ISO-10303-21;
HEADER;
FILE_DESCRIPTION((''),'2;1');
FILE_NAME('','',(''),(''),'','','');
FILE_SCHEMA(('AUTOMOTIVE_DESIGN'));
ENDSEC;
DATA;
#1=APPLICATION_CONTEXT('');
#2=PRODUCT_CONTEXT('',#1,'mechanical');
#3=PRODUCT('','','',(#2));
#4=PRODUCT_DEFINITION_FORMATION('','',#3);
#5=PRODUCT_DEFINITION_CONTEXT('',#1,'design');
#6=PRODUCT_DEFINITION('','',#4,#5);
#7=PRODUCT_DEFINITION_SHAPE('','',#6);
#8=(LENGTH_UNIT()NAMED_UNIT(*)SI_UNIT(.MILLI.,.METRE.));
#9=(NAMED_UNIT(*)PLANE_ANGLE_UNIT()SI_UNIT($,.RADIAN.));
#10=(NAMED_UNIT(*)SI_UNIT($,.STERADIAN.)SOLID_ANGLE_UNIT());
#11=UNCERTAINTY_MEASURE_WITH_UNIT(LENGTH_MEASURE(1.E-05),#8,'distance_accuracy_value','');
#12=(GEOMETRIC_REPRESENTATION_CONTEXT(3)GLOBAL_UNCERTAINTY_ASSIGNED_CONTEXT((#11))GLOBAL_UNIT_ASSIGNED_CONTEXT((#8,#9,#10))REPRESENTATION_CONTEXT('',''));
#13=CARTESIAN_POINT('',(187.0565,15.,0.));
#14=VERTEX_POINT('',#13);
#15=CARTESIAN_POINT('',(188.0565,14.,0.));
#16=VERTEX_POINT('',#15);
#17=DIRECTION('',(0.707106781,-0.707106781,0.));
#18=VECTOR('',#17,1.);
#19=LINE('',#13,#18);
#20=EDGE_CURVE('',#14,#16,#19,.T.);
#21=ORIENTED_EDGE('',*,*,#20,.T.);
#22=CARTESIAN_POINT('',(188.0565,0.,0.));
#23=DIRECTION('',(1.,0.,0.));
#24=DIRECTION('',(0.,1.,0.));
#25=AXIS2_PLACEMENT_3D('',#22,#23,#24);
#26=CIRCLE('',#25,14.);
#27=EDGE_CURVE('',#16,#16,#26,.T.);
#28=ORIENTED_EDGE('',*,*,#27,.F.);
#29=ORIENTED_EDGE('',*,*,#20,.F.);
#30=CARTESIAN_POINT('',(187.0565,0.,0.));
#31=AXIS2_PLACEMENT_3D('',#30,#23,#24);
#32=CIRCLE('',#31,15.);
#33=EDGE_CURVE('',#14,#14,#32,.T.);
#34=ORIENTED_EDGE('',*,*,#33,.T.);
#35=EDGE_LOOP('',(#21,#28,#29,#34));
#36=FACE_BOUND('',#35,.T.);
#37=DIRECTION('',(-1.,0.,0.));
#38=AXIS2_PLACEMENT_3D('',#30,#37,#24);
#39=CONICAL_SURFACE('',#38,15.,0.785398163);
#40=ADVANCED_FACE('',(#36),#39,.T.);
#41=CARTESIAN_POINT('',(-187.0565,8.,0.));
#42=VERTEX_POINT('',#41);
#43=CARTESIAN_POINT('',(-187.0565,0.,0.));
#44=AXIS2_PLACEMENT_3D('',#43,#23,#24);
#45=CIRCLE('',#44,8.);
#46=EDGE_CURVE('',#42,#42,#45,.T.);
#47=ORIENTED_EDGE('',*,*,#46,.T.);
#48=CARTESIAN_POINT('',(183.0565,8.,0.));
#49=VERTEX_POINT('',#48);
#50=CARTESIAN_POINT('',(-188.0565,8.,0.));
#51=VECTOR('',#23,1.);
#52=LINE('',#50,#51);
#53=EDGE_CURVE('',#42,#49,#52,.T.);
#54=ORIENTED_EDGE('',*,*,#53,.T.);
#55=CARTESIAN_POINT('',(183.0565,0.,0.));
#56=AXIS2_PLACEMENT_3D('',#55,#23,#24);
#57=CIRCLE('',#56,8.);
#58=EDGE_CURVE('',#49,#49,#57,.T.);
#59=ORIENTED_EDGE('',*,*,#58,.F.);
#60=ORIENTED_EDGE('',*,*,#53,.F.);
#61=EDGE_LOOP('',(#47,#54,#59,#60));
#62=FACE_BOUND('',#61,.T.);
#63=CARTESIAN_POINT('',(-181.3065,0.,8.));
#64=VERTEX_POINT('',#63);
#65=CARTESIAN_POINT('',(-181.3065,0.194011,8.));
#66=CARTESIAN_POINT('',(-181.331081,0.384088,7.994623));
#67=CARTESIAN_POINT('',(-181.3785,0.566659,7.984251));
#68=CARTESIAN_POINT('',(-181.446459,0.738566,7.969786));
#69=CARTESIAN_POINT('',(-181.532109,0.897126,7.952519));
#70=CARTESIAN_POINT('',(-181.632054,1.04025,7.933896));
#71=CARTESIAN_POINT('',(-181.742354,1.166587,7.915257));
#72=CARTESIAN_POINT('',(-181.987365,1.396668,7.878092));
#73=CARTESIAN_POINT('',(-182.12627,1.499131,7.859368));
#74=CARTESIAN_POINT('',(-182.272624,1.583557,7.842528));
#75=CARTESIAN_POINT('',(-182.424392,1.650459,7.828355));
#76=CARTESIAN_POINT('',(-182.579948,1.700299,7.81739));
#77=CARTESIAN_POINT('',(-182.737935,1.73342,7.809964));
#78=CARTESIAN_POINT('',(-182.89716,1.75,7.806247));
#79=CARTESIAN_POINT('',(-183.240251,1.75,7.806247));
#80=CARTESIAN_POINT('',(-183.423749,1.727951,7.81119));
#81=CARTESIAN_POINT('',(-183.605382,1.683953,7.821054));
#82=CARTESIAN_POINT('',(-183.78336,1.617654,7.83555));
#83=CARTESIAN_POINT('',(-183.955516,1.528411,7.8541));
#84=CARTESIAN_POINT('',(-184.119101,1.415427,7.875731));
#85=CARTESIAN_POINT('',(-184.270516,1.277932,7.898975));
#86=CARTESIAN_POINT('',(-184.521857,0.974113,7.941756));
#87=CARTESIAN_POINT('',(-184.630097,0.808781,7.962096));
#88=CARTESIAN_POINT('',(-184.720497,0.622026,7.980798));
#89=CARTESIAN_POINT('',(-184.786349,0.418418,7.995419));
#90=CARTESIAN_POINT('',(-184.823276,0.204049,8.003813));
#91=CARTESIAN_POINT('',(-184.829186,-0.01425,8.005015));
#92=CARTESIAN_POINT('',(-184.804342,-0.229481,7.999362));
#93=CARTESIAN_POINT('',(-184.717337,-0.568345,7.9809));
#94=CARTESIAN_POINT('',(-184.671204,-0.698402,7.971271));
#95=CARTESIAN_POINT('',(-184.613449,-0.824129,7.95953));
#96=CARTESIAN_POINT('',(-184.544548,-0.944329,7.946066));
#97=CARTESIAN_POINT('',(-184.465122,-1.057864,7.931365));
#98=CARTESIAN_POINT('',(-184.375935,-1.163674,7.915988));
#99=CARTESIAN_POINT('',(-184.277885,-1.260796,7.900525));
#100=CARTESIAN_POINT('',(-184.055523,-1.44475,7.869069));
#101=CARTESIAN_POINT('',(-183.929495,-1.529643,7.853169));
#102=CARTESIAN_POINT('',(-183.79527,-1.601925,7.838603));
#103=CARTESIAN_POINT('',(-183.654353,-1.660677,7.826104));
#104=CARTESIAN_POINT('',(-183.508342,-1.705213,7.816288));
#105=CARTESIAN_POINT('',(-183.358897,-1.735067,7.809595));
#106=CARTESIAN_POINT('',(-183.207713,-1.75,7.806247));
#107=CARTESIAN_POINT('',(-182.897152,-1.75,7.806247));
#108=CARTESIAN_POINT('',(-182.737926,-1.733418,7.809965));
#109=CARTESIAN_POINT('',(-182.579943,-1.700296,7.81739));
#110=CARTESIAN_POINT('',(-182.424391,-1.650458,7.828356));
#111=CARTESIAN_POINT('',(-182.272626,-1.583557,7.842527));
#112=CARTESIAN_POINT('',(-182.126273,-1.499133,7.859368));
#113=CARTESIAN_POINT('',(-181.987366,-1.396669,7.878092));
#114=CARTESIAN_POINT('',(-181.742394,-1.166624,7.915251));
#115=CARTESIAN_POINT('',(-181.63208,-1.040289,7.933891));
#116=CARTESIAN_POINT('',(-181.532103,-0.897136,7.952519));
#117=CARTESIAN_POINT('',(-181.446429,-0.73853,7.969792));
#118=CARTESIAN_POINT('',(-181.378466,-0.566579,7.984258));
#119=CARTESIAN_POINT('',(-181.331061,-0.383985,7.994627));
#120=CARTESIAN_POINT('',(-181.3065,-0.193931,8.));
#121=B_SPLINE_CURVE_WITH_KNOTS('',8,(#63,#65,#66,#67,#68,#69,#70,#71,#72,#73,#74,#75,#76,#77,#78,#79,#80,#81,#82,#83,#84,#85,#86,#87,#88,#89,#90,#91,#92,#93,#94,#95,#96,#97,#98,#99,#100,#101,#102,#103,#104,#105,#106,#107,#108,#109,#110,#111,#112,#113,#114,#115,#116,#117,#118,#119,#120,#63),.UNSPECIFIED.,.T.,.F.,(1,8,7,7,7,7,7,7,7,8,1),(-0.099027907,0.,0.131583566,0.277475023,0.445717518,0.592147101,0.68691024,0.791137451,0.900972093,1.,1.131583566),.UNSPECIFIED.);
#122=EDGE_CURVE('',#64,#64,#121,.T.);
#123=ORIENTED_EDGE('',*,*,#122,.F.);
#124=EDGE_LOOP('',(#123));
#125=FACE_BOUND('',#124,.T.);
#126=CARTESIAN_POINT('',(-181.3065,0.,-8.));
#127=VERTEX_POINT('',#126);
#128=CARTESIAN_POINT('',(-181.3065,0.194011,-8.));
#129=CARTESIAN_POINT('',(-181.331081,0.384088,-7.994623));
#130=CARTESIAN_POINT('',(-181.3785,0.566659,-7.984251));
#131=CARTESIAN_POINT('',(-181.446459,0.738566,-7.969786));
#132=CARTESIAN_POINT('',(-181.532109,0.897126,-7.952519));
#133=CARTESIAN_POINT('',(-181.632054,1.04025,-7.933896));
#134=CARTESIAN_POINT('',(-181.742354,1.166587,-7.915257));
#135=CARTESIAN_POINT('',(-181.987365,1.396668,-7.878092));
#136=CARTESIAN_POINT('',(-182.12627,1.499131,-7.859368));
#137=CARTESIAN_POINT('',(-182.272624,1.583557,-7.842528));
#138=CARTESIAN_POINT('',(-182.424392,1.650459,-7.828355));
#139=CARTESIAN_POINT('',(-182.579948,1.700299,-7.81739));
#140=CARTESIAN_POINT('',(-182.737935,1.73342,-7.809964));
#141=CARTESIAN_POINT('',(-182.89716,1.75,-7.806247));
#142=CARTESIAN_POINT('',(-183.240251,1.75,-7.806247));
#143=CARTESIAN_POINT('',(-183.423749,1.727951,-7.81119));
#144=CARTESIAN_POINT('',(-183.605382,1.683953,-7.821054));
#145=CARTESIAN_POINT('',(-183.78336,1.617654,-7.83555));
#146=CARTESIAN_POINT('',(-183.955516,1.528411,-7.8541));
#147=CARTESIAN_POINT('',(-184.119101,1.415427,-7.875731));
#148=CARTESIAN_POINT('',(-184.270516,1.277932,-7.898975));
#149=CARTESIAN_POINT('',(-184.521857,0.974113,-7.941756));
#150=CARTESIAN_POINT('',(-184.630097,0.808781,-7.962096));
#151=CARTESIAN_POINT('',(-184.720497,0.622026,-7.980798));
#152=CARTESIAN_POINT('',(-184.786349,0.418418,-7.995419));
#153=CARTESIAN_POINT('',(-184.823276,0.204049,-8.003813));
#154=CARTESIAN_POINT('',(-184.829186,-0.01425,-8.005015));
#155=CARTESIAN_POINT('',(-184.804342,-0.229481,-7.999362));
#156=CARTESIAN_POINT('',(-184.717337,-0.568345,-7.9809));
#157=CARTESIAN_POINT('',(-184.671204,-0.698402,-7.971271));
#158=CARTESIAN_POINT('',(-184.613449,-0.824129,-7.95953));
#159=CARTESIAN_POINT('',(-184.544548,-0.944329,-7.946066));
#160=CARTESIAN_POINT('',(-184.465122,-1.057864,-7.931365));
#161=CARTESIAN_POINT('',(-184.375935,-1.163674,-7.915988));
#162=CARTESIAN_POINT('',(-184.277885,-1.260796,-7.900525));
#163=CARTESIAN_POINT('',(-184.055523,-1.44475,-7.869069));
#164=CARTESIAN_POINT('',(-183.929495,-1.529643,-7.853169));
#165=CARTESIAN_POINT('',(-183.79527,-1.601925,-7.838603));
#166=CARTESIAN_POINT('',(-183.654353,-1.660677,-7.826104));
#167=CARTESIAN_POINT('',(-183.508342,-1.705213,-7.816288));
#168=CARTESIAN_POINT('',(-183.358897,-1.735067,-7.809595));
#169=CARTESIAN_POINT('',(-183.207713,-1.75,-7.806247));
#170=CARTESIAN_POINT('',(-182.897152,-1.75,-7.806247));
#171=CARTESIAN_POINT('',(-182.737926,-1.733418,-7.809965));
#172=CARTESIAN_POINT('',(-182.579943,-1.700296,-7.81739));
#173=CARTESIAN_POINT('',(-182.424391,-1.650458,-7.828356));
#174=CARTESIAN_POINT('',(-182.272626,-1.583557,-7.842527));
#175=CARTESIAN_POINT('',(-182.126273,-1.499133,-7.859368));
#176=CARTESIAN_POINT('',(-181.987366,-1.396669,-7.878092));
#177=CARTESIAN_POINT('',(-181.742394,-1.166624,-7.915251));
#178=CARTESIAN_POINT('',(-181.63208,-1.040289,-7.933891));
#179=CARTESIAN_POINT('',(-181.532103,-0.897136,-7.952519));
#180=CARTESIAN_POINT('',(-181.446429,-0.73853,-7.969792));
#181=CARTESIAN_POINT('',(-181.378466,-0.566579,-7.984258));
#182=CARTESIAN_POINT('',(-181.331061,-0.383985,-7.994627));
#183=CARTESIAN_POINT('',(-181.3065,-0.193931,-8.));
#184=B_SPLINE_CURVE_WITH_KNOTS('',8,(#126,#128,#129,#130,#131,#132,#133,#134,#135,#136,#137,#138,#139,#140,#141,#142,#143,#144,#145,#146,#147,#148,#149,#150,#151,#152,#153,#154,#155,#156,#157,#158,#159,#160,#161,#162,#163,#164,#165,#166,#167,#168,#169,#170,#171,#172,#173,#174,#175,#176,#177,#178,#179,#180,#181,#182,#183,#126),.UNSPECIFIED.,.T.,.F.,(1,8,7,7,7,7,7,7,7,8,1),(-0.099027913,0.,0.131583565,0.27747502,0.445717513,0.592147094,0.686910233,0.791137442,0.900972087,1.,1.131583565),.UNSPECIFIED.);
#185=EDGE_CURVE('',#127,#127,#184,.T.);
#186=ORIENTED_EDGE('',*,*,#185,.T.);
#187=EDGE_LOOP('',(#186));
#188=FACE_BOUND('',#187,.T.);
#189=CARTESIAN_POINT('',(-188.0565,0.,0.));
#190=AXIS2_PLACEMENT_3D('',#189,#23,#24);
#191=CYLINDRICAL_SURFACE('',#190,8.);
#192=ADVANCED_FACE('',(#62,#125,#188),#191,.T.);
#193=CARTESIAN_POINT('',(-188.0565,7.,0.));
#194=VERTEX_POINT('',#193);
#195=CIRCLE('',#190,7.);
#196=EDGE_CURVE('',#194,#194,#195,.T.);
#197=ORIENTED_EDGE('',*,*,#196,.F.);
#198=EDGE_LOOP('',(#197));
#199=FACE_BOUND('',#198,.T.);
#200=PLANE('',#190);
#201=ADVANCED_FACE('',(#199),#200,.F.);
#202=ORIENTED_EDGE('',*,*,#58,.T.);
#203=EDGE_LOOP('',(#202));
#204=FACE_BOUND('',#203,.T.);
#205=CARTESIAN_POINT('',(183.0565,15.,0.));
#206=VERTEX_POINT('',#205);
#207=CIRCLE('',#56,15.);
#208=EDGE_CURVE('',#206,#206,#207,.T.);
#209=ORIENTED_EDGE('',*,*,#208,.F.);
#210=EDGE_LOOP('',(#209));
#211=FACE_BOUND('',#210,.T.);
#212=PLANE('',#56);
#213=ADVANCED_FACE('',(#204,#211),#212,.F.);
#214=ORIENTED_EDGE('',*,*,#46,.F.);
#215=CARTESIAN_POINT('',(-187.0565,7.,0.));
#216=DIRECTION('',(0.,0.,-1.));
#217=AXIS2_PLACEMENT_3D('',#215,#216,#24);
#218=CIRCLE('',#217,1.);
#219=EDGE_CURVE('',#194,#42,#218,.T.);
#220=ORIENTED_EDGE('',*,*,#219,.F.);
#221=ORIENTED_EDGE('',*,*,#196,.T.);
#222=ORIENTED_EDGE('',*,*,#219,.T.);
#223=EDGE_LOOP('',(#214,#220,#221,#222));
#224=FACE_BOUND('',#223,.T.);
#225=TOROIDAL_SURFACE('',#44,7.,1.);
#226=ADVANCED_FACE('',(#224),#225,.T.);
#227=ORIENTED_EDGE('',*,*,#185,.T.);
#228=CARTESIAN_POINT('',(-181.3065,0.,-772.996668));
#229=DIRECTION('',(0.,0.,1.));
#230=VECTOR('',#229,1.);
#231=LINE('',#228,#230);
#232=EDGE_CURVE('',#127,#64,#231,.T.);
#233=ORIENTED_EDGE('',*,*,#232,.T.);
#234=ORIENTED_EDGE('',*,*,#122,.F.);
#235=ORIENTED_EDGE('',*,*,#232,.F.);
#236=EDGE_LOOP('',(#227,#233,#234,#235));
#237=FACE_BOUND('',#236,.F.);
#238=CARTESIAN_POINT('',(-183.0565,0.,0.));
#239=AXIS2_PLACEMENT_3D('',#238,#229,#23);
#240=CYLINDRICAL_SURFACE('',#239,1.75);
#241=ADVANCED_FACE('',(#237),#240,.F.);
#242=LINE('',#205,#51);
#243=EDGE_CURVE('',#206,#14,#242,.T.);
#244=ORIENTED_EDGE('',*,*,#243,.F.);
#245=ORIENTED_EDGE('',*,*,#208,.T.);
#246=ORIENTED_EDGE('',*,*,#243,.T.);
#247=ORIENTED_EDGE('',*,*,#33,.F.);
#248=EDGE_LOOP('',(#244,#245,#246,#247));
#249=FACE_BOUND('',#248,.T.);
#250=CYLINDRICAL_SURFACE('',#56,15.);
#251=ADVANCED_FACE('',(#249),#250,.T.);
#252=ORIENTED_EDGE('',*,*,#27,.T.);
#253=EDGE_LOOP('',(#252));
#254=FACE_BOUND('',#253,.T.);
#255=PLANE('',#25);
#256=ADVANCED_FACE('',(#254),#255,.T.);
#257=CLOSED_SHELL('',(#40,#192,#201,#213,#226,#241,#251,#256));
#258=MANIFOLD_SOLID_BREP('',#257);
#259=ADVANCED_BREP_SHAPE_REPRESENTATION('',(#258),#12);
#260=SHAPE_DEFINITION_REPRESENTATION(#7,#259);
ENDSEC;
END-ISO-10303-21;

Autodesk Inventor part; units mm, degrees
ref_plane "YZ Plane" through (0, 0, 0) normal (1, 0, 0) x (0, 1, 0)
ref_plane "XZ Plane" through (0, 0, 0) normal (0, 1, 0) x (-1, 0, 0)
ref_plane "XY Plane" through (0, 0, 0) normal (0, 0, 1) x (1, 0, 0)
sketch "Sketch1" plane through (0, 0, 0) normal (0, 0, 1) x (1, 0, 0)
  line L0 (-188.0565, 0) -> (188.0565, 0)
  line L1 (-188.0565, 0) -> (-188.0565, 8)
  line L2 (-188.0565, 8) -> (183.0565, 8)
  line L3 (183.0565, 8) -> (183.0565, 15)
  line L4 (183.0565, 15) -> (188.0565, 15)
  line L5 (188.0565, 15) -> (188.0565, 0)
  circle A0 centre (-183.0565, 0) radius 1.75
  point P0 (0, 0)
  point P1 (0, 0)
  point P2 (183.0565, 8.25)
  dimension "d0" = 376.113
  dimension "d1" = 16
  dimension "d2" = 5
  dimension "d3" = 30
  dimension "d8" = 3.5
  dimension "d9" = 5
  dimension "d12" = 0.25
revolve "Revolution1" add sketch "Sketch1" angle 360 about axis through (-188.0565, 0, 0) along (1, 0, 0) picked at (-182.9862, 0.5791) contours A0 L0 L1 L2 L3 L4 L5 | L0 A0
fillet "Fillet1" radius 1 1 edges at (-188.0565, -8, 0)
chamfer "Chamfer1" distance 1 angle 45 3 edges at (188.0565, -15, 0) (-187.0565, -8, 0) (-188.0565, -7, 0)
extrude "Extrusion2" cut sketch "Sketch1" against normal through all both and the other way through all contours A0 L0 | L0 A0
properties part number "PWTR-0158" material "Stainless Steel"
